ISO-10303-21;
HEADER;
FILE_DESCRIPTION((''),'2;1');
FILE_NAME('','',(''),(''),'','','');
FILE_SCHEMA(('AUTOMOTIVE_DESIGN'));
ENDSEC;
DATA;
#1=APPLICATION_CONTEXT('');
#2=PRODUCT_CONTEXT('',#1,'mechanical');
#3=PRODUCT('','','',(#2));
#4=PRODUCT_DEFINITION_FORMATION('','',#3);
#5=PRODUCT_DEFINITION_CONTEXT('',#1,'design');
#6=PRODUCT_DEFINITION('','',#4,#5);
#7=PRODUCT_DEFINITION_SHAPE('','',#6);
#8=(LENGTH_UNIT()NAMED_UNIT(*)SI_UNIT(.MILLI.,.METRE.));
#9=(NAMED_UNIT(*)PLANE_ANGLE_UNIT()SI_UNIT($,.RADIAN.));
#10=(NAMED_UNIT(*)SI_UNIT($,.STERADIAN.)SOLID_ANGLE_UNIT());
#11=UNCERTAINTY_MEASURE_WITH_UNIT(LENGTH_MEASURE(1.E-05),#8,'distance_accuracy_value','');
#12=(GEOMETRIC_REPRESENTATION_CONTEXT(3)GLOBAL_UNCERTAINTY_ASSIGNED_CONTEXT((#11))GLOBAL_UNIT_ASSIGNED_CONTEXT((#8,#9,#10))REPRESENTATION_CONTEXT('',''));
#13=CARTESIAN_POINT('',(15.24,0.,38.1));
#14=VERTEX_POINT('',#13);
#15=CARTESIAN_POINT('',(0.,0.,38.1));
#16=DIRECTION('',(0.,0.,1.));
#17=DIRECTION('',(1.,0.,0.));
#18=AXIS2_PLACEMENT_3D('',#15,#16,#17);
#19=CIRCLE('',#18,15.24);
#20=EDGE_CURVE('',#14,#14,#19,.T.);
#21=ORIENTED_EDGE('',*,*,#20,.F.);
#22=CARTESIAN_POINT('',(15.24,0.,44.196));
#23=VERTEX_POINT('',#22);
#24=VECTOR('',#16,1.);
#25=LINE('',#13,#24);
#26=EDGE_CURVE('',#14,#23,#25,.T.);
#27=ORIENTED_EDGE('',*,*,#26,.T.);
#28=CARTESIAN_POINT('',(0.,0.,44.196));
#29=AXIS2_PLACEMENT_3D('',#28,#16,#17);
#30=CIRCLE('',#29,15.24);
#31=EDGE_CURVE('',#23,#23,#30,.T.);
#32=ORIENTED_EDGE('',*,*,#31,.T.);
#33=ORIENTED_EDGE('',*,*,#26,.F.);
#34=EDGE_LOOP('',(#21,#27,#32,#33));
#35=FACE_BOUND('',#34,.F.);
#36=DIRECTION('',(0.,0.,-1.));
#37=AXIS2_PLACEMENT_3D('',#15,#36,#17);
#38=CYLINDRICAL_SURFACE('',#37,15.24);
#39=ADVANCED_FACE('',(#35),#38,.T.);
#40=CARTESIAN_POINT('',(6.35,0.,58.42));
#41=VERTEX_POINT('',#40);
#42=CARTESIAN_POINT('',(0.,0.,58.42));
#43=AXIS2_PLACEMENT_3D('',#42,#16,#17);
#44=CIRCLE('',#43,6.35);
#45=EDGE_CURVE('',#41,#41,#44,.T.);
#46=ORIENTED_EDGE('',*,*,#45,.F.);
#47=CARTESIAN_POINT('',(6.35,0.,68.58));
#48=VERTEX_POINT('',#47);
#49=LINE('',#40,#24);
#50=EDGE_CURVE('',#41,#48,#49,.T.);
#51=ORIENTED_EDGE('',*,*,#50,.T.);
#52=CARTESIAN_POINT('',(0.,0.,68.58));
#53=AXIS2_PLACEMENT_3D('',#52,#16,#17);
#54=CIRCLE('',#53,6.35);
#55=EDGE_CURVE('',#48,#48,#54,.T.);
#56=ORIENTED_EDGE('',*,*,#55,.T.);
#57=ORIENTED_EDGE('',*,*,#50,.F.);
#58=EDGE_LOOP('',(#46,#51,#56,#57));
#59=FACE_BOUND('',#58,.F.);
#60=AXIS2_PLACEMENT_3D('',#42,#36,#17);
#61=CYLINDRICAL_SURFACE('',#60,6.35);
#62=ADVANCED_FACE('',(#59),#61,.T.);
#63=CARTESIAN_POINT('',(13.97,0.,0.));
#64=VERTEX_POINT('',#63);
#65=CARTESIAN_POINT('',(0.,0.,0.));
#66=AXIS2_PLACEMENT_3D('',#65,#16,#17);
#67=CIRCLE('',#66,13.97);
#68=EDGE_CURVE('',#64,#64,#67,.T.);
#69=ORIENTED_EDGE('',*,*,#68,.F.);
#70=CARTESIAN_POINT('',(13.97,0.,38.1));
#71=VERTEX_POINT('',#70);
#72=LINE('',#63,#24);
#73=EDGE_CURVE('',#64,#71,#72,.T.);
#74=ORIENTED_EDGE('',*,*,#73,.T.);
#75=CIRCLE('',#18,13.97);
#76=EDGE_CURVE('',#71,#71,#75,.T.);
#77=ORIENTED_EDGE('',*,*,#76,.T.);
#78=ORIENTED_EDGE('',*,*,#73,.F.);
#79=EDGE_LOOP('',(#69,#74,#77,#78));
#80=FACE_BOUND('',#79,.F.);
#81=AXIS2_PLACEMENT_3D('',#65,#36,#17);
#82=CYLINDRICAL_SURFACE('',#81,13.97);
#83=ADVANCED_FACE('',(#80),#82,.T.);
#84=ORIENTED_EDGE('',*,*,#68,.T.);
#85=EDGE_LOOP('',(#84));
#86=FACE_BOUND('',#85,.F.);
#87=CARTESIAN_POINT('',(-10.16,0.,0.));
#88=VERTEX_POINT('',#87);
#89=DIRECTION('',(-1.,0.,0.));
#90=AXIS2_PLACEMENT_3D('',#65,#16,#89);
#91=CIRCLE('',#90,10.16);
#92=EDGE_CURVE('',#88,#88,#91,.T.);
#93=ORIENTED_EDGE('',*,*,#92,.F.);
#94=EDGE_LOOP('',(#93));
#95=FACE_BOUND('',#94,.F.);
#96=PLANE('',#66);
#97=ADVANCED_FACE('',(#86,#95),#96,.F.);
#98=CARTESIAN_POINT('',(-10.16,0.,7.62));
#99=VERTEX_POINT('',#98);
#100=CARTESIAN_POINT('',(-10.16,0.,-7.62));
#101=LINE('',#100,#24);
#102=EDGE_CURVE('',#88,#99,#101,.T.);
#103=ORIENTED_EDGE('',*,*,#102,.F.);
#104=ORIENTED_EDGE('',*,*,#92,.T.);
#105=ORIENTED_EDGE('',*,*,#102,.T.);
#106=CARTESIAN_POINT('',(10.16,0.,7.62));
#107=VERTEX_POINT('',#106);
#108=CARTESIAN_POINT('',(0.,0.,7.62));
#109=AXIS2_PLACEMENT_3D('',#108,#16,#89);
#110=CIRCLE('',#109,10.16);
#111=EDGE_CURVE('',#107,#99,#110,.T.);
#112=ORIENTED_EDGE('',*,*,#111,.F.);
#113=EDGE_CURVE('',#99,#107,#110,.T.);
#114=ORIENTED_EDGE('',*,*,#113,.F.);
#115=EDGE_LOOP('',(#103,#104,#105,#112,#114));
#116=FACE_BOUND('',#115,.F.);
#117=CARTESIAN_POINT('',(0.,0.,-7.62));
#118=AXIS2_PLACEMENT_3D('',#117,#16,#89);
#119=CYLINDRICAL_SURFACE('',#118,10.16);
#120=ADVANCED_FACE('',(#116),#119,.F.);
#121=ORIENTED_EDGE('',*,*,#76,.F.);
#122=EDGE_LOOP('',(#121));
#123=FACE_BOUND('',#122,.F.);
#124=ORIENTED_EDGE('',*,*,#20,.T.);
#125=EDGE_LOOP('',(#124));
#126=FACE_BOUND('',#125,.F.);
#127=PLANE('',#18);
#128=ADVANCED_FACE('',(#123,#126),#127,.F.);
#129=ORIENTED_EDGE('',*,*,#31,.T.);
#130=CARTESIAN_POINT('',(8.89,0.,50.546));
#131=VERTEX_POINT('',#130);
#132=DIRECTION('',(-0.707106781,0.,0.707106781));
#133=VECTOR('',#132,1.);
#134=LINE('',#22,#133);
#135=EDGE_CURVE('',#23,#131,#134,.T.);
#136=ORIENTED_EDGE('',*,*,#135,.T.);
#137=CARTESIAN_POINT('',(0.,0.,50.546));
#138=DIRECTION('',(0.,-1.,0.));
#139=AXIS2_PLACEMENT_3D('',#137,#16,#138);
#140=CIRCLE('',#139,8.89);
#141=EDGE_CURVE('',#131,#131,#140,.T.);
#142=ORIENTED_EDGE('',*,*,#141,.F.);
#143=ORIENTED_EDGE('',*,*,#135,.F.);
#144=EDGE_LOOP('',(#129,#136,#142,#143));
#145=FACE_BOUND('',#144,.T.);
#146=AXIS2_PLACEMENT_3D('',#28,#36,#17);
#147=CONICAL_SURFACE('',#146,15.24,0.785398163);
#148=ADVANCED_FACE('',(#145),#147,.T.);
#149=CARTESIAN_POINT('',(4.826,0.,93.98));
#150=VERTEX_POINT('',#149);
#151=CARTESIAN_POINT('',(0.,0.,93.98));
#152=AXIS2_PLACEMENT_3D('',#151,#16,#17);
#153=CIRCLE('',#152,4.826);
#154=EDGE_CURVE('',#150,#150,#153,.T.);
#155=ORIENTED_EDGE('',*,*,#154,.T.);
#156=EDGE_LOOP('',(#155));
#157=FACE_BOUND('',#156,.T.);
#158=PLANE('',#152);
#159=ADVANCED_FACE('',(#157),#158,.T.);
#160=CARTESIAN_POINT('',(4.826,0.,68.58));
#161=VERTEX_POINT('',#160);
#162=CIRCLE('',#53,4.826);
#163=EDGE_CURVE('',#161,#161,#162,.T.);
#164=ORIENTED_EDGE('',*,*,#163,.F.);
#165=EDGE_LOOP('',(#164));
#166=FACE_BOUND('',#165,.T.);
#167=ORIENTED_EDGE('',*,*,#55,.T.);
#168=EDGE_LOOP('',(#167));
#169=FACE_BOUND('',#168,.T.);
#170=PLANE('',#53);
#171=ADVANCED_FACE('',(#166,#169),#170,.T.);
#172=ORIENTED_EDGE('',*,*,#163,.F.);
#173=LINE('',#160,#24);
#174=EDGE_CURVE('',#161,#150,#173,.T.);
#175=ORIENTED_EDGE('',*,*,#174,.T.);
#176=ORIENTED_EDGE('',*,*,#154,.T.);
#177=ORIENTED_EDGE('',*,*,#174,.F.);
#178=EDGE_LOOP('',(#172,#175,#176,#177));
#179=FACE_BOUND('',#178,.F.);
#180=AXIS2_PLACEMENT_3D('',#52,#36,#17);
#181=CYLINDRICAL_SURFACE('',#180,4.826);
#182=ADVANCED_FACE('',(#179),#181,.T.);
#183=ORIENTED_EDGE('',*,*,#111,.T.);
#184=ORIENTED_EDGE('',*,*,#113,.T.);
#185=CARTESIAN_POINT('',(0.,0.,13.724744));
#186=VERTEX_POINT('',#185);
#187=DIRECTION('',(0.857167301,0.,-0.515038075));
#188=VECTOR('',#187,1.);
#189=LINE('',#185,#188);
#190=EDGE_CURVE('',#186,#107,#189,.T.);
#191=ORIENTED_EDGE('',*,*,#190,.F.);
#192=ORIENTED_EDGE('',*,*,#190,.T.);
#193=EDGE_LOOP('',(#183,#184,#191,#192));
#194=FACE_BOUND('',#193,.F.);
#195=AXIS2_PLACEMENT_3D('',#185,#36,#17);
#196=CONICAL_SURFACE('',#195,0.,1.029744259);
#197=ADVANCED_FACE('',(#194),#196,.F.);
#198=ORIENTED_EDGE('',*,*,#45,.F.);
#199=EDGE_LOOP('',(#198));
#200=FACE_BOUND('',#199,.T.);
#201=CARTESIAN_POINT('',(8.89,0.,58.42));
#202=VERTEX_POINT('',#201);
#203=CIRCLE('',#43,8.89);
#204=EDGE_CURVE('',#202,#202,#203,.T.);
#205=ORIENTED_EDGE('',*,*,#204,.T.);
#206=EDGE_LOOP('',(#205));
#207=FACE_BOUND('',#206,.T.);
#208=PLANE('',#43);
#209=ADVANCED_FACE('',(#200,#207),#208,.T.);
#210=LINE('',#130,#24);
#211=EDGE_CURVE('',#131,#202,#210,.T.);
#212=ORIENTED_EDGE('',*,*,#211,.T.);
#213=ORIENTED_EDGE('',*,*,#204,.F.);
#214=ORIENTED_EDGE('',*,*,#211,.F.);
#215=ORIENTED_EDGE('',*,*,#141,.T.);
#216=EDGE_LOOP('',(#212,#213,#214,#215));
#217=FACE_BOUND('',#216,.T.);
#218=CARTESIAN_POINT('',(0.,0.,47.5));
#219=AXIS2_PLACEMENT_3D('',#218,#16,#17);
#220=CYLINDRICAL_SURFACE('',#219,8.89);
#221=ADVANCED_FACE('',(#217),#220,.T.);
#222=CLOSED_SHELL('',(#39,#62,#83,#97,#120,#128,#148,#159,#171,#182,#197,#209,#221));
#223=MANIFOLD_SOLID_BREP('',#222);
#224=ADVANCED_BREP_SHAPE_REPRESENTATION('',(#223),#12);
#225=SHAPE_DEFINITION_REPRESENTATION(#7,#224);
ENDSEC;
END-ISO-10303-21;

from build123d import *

# Parameters (mm, degrees)
F0_R         = 13.97
F1_DEPTH     = 38.1
F2_R         = 15.24
F3_DEPTH     = 12.7
F4_R         = 8.89
F5_DEPTH     = 7.62
F6_R         = 6.35
F7_DEPTH     = 10.16
F8_R         = 4.826
F9_DEPTH     = 25.4
F10_S5_R     = 8.89
F10_T6_DEPTH = 23
F12_D        = 20.32
F12_DEPTH    = 7.62
F12_TIP      = 6.1047438893


# Not quite as in the source:
# - a fillet or chamfer that OpenCascade refuses, or shapes differently, is made with other operations: its cross-section is extruded or revolved along the edge and cut away or added


with BuildPart() as f1:
    # F0 (on Top) → F1 (new body)
    with BuildSketch(Plane.XY):
        Circle(F0_R)
    extrude(amount=F1_DEPTH)

    # F2 (on face) → F3 (join)
    with BuildSketch(Plane.XY.offset(38.1)):
        Circle(F2_R)
    extrude(amount=F3_DEPTH)

    # F4 (on face) → F5 (join)
    with BuildSketch(Plane.XY.offset(50.8)):
        Circle(F4_R)
    extrude(amount=F5_DEPTH)

    # F6 (on face) → F7 (join)
    with BuildSketch(Plane.XY.offset(58.42)):
        Circle(F6_R)
    extrude(amount=F7_DEPTH)

    # F8 (on face) → F9 (join)
    with BuildSketch(Plane.XY.offset(68.58)):
        Circle(F8_R)
    extrude(amount=F9_DEPTH)

    # F10: chamfer of 6.604 on 1 edges, made by hand


with BuildPart() as f10_tool2:
    # F10_s3 → F10_t4 (revolve)
    with BuildSketch(Plane.XZ):
        Polygon((15.24, 44.196), (8.636, 50.8), (15.24, 50.8), align=None)
    revolve(axis=Axis((0, 0, 50.8), (0, 0, 1)))

    # F10_s5 → F10_t6 (cut, symmetric)
    with BuildSketch(Plane.XY.offset(47.5)):
        Circle(F10_S5_R)
    extrude(amount=F10_T6_DEPTH, both=True, mode=Mode.SUBTRACT)


with BuildPart() as f1_1:
    add(f1.part)

    # F10_t1: cut F10_tool2
    add(f10_tool2.part, mode=Mode.SUBTRACT)

    # F12
    with Locations(Plane(origin=(0, 0, 0), x_dir=(1, 0, 0), z_dir=(0, 0, -1))):
        with Locations((0, 0)):
            Hole(F12_D / 2, depth=F12_DEPTH)
            with Locations((0, 0, -(F12_DEPTH + F12_TIP / 2))):  # 118° drill point
                Cone(0, F12_D / 2, F12_TIP, mode=Mode.SUBTRACT)


solid = f1_1.part
